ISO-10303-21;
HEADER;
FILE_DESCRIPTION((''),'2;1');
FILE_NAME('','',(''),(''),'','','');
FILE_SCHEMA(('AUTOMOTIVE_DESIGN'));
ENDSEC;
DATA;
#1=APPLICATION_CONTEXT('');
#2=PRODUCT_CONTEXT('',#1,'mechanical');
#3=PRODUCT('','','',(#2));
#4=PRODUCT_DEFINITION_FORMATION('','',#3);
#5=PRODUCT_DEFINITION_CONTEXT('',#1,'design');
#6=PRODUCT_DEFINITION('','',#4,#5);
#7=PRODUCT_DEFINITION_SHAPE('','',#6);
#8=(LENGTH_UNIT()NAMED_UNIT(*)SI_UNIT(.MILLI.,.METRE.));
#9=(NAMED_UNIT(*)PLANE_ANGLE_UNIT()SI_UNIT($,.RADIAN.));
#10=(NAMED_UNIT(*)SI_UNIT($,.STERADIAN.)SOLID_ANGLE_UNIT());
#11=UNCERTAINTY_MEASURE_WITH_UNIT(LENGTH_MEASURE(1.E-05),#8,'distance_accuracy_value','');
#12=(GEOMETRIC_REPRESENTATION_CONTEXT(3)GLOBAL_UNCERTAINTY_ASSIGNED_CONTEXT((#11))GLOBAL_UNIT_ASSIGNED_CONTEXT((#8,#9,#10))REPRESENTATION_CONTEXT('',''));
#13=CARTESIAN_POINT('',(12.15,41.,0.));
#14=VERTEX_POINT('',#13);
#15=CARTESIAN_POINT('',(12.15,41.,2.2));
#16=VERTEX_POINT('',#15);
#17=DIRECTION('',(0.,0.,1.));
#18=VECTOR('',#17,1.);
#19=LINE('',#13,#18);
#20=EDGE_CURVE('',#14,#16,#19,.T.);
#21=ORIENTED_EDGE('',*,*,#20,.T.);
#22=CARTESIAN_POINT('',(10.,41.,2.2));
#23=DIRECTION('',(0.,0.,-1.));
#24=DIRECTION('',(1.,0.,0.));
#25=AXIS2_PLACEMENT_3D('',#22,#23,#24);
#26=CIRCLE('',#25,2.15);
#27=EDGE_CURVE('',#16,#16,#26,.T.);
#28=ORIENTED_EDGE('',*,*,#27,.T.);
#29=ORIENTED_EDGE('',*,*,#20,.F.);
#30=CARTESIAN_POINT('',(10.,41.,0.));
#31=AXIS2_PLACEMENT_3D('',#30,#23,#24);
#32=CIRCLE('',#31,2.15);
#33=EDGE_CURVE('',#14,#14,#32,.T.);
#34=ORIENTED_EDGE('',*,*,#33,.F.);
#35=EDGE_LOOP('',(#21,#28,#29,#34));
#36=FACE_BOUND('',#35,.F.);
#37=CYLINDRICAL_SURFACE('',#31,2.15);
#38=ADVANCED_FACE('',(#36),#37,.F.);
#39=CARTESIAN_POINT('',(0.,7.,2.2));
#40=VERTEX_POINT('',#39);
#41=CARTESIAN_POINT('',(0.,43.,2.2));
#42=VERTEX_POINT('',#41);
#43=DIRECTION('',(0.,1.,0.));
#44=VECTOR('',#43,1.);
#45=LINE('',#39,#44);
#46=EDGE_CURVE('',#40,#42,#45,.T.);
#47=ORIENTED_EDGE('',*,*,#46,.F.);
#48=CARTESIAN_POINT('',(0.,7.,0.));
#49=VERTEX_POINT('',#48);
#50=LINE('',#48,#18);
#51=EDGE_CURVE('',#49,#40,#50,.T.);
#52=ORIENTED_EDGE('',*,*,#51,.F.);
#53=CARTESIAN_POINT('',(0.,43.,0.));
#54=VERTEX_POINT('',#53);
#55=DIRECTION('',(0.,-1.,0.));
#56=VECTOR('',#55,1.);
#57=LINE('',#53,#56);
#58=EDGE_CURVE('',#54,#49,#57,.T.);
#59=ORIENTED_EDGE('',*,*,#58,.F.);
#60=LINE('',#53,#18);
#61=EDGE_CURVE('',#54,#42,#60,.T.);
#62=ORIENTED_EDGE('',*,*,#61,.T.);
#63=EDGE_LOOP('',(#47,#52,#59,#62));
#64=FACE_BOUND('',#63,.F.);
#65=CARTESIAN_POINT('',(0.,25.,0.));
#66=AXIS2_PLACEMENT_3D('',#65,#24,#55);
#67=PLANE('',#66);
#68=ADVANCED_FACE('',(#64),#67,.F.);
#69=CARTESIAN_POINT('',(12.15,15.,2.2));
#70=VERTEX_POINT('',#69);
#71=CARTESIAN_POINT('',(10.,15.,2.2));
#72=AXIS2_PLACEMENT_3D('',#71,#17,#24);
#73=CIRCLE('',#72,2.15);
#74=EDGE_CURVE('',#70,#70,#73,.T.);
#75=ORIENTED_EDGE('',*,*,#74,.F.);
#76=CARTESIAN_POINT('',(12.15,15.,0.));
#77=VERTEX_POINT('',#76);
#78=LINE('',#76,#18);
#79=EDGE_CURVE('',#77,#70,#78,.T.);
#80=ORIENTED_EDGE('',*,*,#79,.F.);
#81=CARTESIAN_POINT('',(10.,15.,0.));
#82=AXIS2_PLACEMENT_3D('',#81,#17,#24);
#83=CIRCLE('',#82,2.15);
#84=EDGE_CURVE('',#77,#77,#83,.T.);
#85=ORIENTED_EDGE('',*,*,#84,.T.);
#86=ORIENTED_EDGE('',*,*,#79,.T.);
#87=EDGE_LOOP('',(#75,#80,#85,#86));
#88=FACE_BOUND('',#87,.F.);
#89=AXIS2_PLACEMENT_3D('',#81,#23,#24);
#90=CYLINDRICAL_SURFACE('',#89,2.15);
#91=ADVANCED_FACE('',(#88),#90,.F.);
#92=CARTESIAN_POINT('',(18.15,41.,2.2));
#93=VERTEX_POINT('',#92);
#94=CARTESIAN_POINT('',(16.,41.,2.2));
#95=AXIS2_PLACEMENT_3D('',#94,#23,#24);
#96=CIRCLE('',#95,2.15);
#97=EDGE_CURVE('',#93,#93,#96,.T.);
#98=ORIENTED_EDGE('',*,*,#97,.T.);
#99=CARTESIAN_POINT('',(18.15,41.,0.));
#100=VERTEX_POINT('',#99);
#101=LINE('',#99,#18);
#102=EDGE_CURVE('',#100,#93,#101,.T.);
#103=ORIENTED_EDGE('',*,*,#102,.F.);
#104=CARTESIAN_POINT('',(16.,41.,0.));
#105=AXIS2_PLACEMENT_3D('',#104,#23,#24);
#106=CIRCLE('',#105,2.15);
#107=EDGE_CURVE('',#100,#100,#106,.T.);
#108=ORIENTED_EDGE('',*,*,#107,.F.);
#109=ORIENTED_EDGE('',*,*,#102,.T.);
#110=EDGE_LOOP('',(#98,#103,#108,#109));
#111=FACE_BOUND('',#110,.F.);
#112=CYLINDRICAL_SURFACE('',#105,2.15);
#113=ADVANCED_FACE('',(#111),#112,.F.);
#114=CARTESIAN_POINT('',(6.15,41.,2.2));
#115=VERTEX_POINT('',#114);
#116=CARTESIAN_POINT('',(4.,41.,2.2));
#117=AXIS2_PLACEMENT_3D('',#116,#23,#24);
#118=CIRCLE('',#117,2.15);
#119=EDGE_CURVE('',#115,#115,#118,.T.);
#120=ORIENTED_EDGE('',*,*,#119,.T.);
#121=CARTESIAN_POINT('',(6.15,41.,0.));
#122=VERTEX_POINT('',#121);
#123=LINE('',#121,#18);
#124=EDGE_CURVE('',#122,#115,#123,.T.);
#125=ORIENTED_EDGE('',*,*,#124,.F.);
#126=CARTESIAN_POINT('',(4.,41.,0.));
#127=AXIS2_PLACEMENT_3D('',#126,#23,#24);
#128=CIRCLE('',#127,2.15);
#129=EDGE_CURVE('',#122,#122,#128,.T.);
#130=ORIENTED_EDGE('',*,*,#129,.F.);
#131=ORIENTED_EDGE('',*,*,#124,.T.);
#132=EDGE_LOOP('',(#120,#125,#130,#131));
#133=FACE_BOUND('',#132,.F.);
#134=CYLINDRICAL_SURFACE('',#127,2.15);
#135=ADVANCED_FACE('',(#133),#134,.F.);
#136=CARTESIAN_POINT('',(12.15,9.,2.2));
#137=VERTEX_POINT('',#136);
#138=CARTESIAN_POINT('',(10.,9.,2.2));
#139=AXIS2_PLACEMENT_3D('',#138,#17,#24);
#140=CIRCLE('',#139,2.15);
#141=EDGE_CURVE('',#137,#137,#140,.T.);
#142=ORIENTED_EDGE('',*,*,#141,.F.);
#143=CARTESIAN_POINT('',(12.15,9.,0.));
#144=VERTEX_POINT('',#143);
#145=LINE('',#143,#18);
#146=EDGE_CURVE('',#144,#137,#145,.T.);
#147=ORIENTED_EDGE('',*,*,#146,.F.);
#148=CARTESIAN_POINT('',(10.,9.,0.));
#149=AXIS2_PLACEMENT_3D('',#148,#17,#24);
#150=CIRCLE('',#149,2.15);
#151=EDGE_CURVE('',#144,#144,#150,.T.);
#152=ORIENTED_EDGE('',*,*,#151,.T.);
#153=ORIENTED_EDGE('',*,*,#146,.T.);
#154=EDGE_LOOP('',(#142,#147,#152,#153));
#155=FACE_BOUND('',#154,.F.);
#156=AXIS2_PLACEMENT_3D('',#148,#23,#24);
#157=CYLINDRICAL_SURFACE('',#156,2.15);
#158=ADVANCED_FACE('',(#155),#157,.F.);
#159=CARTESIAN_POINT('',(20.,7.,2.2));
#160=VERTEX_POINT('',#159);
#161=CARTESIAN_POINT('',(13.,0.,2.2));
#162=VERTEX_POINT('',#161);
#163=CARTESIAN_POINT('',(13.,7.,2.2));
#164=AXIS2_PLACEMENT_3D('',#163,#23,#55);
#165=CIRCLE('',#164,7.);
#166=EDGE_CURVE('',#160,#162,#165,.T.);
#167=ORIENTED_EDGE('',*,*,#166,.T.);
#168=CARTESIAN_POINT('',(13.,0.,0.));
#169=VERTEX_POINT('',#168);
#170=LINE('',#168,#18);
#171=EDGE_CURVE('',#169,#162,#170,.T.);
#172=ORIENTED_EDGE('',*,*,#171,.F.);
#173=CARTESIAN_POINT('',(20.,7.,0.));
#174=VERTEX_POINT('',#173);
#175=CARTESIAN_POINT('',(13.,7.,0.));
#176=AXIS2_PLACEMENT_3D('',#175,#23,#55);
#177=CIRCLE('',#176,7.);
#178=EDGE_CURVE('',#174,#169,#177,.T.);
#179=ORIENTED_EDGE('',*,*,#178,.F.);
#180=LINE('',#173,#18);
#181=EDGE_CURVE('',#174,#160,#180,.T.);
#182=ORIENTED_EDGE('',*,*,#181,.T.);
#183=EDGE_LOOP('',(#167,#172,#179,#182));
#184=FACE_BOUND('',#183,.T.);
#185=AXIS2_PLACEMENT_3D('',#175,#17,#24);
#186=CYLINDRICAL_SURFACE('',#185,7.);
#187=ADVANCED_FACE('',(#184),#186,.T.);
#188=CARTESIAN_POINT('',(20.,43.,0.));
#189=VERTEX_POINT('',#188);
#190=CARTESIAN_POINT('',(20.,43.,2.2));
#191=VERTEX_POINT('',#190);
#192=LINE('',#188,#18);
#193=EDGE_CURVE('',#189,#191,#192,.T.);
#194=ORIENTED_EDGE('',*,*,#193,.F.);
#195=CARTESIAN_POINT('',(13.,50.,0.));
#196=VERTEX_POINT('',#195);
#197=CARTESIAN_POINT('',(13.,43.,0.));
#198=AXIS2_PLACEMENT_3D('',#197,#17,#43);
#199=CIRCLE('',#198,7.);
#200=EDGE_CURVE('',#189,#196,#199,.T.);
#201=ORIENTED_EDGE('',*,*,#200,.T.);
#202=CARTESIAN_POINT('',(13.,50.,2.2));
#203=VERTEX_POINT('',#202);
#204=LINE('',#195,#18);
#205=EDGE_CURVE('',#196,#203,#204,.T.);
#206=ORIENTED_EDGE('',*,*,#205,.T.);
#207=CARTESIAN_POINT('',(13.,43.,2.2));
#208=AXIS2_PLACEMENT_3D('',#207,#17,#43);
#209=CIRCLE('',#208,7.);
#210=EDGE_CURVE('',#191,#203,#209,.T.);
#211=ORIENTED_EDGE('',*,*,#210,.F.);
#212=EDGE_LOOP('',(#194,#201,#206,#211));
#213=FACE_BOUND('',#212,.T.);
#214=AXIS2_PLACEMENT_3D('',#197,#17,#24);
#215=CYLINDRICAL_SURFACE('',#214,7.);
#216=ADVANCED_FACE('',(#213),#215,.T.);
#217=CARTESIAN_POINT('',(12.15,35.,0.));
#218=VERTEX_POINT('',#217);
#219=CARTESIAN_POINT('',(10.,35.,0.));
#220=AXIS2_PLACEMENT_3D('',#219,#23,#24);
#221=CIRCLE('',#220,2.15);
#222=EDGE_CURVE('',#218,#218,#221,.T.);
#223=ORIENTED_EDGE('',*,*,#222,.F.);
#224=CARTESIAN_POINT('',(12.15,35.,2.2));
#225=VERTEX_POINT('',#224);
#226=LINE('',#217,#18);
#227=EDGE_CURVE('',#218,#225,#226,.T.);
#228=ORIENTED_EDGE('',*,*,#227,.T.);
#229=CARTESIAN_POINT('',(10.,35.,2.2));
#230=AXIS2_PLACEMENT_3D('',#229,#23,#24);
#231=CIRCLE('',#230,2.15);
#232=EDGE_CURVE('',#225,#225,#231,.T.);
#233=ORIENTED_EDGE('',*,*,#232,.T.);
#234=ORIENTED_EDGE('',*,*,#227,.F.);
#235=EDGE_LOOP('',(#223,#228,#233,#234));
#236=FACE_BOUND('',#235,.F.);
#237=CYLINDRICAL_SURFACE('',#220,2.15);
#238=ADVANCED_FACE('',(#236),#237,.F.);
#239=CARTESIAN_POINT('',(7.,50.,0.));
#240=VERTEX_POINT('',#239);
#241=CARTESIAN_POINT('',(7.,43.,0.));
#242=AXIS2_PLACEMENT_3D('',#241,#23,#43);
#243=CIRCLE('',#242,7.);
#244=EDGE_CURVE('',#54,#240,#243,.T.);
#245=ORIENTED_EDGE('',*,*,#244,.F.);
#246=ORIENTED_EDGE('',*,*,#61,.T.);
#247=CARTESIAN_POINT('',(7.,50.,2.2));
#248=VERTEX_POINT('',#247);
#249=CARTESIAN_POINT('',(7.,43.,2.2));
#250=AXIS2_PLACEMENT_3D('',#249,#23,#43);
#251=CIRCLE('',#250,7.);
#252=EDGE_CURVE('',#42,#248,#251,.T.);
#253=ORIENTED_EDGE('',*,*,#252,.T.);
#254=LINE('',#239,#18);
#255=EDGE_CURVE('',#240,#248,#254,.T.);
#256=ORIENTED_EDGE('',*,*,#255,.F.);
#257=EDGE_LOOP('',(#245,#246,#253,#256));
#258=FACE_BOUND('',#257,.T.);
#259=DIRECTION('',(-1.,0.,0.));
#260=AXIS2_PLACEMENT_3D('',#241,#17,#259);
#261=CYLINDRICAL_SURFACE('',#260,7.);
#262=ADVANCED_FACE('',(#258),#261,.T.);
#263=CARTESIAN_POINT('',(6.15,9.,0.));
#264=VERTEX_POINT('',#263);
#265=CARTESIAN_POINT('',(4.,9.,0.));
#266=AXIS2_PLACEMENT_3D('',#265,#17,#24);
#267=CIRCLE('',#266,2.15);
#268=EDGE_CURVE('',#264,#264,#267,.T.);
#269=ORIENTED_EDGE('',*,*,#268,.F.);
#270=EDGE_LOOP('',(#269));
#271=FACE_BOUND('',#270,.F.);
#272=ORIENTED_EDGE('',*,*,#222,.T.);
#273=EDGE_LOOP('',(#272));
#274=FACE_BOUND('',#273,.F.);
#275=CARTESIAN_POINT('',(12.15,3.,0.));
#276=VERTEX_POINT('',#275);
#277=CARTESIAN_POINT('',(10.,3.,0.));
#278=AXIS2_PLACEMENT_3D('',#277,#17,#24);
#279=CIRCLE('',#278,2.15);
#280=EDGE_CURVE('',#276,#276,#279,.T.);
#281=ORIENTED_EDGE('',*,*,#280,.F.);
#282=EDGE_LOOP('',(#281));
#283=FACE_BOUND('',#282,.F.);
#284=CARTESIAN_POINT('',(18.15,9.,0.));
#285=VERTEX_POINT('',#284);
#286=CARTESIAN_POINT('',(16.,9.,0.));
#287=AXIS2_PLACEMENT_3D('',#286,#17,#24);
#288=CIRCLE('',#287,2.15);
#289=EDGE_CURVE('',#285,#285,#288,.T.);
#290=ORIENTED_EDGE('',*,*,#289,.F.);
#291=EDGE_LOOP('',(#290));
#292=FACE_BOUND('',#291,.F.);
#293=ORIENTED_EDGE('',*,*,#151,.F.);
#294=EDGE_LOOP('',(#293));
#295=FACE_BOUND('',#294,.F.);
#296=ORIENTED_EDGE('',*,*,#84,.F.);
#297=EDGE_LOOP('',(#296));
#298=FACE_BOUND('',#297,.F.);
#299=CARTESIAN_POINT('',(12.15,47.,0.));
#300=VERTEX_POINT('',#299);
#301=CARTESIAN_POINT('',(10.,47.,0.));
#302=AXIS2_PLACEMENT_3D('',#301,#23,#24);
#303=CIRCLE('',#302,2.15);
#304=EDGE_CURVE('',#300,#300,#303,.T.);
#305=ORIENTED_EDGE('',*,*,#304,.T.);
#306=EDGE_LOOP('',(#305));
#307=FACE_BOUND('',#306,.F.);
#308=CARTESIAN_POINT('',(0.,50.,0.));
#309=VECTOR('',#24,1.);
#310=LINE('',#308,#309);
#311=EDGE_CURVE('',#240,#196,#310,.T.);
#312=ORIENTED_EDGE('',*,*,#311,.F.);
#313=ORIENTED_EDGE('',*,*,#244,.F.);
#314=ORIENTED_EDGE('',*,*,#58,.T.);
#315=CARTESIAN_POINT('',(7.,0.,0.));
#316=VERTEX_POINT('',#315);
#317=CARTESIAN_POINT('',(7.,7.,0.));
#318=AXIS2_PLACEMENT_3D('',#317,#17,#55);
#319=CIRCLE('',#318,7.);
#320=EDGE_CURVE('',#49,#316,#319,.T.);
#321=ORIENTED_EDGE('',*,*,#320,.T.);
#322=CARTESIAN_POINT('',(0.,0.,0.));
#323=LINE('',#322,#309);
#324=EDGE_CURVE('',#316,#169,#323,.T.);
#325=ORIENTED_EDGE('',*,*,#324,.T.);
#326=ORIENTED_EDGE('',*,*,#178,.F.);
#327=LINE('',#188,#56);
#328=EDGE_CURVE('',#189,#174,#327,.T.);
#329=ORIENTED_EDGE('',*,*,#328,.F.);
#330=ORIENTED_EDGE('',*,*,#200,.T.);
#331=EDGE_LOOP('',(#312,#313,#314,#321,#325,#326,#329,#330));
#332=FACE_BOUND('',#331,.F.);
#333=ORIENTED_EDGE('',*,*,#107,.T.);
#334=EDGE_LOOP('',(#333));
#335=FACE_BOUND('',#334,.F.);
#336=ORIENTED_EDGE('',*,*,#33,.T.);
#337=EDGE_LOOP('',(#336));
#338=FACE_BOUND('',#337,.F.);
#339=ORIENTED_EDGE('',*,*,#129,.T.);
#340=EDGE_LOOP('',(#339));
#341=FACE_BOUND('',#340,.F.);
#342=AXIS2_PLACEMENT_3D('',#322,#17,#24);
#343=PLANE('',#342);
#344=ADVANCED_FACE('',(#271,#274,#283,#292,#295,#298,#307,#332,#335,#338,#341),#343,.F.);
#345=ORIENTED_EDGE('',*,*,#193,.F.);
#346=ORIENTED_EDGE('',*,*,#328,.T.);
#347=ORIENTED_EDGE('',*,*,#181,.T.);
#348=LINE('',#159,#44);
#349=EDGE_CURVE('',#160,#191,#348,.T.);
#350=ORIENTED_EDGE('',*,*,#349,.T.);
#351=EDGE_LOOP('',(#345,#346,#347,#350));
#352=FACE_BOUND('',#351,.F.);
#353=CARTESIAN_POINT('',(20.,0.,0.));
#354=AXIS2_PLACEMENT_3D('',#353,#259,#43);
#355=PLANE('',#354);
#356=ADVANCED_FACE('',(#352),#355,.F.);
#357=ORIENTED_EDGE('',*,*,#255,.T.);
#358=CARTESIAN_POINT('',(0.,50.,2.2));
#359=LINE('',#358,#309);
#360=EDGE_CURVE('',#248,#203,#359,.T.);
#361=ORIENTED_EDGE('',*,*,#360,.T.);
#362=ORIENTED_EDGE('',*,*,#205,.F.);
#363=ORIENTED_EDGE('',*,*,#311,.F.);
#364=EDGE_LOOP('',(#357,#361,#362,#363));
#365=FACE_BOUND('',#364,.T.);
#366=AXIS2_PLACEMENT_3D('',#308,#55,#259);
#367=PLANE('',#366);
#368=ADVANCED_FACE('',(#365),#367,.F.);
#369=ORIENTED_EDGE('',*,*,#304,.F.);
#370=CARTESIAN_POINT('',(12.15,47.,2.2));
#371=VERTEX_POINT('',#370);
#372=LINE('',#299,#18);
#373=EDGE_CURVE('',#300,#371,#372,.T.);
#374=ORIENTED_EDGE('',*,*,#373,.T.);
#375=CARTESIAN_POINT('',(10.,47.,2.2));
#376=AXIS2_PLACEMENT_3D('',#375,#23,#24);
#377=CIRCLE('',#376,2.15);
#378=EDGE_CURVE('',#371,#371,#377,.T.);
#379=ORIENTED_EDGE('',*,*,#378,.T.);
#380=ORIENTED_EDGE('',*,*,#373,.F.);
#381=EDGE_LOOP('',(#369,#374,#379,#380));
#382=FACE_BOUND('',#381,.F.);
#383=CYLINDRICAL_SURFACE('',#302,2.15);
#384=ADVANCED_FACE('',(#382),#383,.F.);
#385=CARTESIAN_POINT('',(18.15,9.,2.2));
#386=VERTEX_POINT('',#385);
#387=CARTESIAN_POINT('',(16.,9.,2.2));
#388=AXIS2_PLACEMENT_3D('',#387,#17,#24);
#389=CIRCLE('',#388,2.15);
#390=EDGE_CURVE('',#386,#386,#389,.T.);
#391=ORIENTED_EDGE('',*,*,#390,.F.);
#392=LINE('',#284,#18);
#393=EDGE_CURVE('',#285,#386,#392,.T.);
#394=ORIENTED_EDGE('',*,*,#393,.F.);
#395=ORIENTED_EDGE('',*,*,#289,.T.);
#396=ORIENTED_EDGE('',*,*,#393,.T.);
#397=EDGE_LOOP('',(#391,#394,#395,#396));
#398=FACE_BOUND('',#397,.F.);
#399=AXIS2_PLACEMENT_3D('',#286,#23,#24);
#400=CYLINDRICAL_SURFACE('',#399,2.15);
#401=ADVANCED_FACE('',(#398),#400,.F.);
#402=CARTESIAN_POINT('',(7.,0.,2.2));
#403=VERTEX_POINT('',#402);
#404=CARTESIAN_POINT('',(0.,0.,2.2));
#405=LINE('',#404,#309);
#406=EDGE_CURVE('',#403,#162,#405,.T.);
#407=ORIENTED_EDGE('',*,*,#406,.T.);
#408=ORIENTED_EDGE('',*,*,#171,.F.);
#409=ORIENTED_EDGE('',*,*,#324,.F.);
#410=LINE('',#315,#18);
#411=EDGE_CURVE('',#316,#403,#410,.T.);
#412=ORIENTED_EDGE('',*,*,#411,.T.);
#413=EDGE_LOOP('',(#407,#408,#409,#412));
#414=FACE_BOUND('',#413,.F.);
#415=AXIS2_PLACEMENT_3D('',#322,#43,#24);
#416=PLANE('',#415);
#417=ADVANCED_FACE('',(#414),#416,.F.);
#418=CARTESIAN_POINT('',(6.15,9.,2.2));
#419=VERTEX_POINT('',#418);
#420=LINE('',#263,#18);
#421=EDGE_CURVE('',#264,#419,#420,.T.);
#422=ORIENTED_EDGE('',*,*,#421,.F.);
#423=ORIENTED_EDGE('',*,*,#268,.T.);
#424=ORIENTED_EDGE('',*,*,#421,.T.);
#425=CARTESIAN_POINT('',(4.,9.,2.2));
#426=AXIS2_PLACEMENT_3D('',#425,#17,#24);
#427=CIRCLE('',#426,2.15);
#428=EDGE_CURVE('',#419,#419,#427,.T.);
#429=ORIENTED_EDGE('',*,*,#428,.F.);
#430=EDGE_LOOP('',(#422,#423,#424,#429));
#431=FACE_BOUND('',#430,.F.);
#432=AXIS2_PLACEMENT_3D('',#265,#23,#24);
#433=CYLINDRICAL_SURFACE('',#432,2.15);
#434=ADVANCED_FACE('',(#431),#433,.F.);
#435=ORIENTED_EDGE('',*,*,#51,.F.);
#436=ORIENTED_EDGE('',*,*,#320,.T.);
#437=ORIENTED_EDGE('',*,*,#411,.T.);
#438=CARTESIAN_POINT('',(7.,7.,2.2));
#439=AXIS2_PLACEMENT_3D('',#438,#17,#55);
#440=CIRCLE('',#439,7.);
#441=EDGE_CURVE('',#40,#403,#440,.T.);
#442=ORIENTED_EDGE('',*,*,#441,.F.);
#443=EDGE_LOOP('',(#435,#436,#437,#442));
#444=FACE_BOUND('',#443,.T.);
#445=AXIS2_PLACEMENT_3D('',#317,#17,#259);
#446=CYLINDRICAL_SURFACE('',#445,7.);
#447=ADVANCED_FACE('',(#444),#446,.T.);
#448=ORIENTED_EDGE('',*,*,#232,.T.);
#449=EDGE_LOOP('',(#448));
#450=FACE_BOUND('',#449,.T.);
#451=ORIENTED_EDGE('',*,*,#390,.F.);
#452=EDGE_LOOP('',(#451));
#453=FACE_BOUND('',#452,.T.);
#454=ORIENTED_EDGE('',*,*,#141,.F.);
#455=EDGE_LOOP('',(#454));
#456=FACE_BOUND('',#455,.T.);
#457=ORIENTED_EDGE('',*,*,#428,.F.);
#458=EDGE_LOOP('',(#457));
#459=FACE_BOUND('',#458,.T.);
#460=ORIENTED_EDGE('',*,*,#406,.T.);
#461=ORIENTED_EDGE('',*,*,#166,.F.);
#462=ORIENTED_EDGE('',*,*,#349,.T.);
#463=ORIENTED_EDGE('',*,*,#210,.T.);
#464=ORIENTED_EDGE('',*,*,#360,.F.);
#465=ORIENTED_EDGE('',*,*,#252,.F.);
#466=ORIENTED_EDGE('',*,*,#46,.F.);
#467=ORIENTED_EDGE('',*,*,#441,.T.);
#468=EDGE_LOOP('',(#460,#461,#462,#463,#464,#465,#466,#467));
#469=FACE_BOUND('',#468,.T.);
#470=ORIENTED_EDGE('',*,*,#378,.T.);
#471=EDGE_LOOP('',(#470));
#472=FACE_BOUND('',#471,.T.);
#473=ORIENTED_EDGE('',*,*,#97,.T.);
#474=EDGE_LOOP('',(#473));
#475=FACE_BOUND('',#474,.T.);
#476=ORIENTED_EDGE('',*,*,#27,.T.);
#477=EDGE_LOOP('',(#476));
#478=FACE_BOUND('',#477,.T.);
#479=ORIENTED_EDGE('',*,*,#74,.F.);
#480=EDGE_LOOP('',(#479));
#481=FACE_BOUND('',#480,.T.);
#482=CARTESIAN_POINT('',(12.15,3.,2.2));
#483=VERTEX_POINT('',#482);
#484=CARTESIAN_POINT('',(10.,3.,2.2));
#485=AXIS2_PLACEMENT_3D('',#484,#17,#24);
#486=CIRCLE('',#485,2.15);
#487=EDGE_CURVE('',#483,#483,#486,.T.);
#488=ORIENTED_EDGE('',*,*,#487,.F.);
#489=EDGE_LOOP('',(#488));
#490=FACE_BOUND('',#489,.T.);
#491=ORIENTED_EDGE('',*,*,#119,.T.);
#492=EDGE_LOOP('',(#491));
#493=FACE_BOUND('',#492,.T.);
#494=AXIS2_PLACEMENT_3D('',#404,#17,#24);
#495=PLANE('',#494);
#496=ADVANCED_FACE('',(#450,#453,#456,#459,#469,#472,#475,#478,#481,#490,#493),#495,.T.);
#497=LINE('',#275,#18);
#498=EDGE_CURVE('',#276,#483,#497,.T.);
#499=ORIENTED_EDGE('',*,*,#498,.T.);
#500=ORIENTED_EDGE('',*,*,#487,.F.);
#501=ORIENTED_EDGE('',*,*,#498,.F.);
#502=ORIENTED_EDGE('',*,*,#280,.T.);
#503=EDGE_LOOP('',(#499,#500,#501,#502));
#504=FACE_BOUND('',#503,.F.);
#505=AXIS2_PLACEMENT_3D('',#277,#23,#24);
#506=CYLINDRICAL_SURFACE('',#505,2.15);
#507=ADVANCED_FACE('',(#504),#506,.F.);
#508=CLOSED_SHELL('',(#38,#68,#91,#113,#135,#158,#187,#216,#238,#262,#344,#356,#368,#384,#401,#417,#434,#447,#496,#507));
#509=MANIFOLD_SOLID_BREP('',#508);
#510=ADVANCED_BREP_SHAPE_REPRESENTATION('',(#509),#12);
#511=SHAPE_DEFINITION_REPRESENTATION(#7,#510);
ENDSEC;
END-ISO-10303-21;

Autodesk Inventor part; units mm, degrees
ref_plane "YZ Plane" through (0, 0, 0) normal (1, 0, 0) x (0, 1, 0)
ref_plane "XZ Plane" through (0, 0, 0) normal (0, 1, 0) x (-1, 0, 0)
ref_plane "XY Plane" through (0, 0, 0) normal (0, 0, 1) x (1, 0, 0)
sketch "Esquisse5" plane through (0, 0, 0) normal (0, 0, 1) x (1, 0, 0)
  line L0 (0, 0) -> (20, 0)
  line L1 (20, 0) -> (20, 25)
  line L2 (20, 25) -> (0, 25)
  line L3 (0, 25) -> (0, 0)
  line L4 (10, 0) -> (10, 25) construction
  circle A0 centre (10, 3) radius 2.15
  circle A1 centre (10, 9) radius 2.15
  circle A2 centre (10, 15) radius 2.15
  line L5 (10, 9) -> (20, 9) construction
  circle A3 centre (16, 9) radius 2.15
  circle A4 centre (4, 9) radius 2.15
  circle A5 centre (10, 9) radius 2.15
  dimension "d61" = 20
  dimension "d62" = 25
  dimension "d63" = 3
  dimension "d64" = 4.3
  dimension "d67" = 6
  dimension "d74" = 6
  dimension "d77" = 6
extrude "Extrusion5" add sketch "Esquisse5" along normal blind 2.2
fillet "Congé4" radius 7 2 edges at (0, 0, 1.1) (20, 0, 1.1)
mirror "Symétrie1" about plane through (20, 25, 0) normal (0, 1, 0)
equation "\"d64\" = Holes"
equation "\"d80\" = Depth"
equation "\"d100\" = Rounding"
equation "\"Depth\" = 2.2"
equation "\"Holes\" = 4.3"
equation "\"Height\" = 0"
equation "\"Rounding\" = 7"
properties part number "ArmToArm"
